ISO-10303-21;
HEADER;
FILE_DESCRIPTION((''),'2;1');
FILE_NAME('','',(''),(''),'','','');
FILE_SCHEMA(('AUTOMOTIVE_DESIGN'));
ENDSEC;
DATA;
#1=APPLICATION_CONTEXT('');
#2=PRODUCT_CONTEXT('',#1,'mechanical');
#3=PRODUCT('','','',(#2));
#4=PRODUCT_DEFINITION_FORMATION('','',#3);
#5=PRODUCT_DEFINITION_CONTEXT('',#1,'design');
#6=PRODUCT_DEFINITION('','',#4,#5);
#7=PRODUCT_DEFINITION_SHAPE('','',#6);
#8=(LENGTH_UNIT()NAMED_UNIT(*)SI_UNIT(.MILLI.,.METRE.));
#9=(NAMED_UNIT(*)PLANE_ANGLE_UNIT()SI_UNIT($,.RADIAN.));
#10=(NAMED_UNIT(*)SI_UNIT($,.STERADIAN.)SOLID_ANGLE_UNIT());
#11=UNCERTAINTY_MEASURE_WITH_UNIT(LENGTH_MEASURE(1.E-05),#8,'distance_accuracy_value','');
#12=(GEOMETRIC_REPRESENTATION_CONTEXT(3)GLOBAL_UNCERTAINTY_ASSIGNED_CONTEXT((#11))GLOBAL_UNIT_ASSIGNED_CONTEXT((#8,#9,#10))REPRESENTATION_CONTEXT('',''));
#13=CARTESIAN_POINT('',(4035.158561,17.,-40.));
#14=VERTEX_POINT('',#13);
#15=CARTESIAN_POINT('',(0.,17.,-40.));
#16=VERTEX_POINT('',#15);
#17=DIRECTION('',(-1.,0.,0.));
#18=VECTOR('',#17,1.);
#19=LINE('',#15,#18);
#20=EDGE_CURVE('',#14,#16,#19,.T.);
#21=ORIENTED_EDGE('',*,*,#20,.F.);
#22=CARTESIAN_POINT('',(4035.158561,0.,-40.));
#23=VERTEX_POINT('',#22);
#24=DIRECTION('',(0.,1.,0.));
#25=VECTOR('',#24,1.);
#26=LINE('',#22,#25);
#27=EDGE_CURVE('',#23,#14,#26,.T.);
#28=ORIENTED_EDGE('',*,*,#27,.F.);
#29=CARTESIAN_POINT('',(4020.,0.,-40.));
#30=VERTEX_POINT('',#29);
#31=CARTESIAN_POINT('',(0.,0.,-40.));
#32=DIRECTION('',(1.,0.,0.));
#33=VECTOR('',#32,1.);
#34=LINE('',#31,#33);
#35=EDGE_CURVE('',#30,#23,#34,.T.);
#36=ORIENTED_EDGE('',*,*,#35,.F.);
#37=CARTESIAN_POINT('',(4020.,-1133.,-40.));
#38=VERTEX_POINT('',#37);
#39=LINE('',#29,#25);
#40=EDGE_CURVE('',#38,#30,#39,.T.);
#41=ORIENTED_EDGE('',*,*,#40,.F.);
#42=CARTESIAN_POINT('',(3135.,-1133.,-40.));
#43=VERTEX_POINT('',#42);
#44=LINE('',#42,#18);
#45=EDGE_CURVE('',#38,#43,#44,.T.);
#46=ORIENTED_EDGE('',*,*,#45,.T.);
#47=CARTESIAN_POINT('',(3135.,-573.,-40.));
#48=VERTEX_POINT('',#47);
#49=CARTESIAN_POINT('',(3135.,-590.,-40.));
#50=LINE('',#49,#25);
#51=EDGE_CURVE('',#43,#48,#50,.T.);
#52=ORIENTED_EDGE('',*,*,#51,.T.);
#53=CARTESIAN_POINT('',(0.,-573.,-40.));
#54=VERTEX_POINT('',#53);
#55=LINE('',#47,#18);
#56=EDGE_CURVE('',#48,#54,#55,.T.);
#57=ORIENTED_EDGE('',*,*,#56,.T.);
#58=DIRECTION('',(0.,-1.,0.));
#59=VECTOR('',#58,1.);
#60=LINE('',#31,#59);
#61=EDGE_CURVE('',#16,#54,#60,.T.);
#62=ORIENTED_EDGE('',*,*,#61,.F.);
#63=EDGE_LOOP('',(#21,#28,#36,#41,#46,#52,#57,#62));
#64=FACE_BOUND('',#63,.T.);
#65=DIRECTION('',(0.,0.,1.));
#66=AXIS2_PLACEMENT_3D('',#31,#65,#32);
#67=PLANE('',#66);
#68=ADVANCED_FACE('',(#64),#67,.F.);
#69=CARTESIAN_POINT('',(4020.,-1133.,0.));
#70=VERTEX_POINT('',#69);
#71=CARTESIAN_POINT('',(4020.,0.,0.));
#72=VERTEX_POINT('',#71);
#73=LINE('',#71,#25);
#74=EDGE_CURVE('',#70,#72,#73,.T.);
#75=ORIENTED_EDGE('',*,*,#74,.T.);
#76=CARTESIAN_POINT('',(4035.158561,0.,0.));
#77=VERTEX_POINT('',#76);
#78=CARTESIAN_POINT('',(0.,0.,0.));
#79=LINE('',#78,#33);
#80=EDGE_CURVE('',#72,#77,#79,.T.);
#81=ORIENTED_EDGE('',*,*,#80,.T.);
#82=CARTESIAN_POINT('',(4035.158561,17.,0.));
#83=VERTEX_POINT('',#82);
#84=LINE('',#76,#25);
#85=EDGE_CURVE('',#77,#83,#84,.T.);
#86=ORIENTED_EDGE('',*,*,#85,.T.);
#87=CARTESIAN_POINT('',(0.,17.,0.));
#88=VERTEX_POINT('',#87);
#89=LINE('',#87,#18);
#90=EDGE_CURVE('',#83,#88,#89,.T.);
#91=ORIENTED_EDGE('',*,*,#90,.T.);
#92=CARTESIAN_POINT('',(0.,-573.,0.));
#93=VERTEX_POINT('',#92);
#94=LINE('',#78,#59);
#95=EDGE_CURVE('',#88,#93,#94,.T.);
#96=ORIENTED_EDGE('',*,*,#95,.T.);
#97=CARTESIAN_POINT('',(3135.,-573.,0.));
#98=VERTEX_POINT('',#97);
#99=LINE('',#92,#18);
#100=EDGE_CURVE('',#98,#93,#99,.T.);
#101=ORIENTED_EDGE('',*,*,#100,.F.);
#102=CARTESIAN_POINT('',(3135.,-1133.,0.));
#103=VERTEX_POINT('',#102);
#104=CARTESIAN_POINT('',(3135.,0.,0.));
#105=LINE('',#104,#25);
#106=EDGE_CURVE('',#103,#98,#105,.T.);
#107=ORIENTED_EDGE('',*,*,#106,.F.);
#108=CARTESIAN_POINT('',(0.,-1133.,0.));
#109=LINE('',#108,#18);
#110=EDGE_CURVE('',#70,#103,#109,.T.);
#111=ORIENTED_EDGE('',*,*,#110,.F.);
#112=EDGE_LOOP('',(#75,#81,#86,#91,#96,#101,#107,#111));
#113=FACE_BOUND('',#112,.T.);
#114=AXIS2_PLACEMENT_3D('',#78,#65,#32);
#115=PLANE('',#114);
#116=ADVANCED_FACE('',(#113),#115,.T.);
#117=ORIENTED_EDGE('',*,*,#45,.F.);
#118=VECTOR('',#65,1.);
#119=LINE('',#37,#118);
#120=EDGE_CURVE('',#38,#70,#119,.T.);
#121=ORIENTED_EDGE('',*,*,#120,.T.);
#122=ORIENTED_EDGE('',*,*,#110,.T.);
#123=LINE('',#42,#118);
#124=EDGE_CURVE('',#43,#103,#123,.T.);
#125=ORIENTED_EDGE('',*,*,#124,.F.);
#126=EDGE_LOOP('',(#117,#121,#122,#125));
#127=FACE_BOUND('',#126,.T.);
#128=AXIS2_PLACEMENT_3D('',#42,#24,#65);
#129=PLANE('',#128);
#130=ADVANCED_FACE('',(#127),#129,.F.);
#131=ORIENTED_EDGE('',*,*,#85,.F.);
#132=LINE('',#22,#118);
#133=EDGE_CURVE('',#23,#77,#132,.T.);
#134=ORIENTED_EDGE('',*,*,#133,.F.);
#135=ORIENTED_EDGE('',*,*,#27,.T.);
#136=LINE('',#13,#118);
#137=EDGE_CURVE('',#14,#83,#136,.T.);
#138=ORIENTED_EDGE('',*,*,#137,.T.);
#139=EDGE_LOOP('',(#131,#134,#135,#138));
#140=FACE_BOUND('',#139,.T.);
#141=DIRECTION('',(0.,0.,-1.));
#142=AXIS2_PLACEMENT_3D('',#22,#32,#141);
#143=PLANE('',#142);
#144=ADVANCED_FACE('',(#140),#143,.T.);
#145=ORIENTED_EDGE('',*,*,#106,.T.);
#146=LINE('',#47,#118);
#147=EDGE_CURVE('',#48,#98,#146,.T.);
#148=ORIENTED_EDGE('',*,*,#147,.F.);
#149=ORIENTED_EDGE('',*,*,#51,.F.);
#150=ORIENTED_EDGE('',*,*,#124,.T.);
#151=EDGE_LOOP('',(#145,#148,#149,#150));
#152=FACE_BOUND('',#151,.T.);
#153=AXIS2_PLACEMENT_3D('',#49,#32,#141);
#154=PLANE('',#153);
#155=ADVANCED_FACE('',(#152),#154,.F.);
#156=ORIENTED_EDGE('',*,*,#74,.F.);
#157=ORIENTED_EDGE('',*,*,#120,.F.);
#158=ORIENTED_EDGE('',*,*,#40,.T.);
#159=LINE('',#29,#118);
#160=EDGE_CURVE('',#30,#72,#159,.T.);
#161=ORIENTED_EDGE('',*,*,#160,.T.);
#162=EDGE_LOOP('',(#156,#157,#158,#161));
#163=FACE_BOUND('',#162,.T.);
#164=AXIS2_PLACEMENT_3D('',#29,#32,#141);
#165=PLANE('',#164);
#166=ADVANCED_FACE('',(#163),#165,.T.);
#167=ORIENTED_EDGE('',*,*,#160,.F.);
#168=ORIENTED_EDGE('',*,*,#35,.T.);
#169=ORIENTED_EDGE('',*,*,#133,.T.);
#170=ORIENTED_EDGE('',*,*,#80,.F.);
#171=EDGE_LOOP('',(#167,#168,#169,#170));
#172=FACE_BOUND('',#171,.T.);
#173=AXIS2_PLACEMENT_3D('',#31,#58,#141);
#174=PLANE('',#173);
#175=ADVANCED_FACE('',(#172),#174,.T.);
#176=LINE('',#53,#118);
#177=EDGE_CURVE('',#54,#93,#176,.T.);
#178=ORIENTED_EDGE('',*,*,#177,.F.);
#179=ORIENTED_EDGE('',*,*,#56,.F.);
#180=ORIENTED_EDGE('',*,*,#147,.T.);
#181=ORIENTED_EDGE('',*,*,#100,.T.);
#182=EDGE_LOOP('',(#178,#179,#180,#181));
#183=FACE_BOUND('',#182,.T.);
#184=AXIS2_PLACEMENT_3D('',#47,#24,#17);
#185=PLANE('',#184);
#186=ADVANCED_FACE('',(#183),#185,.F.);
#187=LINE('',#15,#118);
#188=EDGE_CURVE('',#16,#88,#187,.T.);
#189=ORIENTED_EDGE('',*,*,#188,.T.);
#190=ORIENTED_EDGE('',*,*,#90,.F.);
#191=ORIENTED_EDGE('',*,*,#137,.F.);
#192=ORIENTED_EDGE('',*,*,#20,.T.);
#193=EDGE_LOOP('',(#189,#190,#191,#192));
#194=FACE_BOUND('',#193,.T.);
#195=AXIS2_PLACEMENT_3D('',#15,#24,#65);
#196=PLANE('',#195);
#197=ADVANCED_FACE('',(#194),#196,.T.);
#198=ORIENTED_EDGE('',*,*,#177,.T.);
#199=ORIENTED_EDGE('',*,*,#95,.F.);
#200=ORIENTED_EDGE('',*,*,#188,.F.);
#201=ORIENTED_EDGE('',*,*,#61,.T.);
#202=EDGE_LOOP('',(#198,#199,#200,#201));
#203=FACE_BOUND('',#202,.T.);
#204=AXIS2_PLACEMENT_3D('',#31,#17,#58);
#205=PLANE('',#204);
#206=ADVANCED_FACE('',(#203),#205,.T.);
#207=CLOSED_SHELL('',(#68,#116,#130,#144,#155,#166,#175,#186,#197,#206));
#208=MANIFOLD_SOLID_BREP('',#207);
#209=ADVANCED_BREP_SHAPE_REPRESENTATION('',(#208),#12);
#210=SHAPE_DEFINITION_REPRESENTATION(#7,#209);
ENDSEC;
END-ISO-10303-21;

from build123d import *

# Parameters (mm, degrees)
TABAN_FLAN_1_DEPTH         = 40
KES_EKSTR_ZYON1_DEPTH      = 4482.26098325
KES_EKSTR_ZYON1_DEPTH_BACK = 4482.26098325
IZIM2_W                    = 2970
IZIM2_H                    = 405
KES_EKSTR_ZYON2_DEPTH      = 4482.26098325
KES_EKSTR_ZYON2_DEPTH_BACK = 4482.26098325
IZIM4_W                    = 10
IZIM4_H                    = 2000
SEKME1_DEPTH               = 40
IZIM7_W                    = 4035.158561441
IZIM7_H                    = 17
SEKME2_DEPTH               = 40
KES_EKSTR_ZYON3_DEPTH      = 4504.787807609
KES_EKSTR_ZYON3_DEPTH_BACK = 4504.787807609
IZIM10_W                   = 3135
IZIM10_H                   = 17
KES_EKSTR_ZYON4_DEPTH      = 4504.787807609
KES_EKSTR_ZYON4_DEPTH_BACK = 4504.787807609
IZIM12_W                   = 885
IZIM12_H                   = 860
KES_EKSTR_ZYON5_DEPTH      = 4194.292813049
KES_EKSTR_ZYON5_DEPTH_BACK = 4194.292813049
IZIM14_W                   = 885
IZIM14_H                   = 7


# Sheet-metal steps are written as plain solids
with BuildPart() as part:
    # Çizim1 → Taban-Flanş1 (new body)
    with BuildSketch(Plane.XY):
        Polygon((0, 0), (0, -1385), (3250, -1385), (3250, -2000), (4010, -2000), (4010, 0), align=None)
    extrude(amount=-TABAN_FLAN_1_DEPTH)

    # Çizim2 → Kes-Ekstrüzyon1 (cut, two sides: drawn at the far end of the back side and taken through both)
    with BuildSketch(Plane.XY.offset(-KES_EKSTR_ZYON1_DEPTH_BACK)):
        with Locations((1485, -1182.5)):
            Rectangle(IZIM2_W, IZIM2_H)
    extrude(amount=KES_EKSTR_ZYON1_DEPTH + KES_EKSTR_ZYON1_DEPTH_BACK, mode=Mode.SUBTRACT)

    # Çizim3 → Kes-Ekstrüzyon2 (cut, two sides: drawn at the far end of the back side and taken through both)
    with BuildSketch(Plane.XY.offset(-KES_EKSTR_ZYON2_DEPTH_BACK)):
        Polygon((0, -980), (2970, -980), (2970, -1385), (3135, -1385), (3135, -590), (0, -590), align=None)
    extrude(amount=KES_EKSTR_ZYON2_DEPTH + KES_EKSTR_ZYON2_DEPTH_BACK, mode=Mode.SUBTRACT)

    # Çizim4 → Sekme1 (add)
    with BuildSketch(Plane.XY):
        with Locations((4015, -1000)):
            Rectangle(IZIM4_W, IZIM4_H)
    extrude(amount=-SEKME1_DEPTH)

    # Çizim7 → Sekme2 (add)
    with BuildSketch(Plane.XY):
        with Locations((2017.579280721, 8.5)):
            Rectangle(IZIM7_W, IZIM7_H)
    extrude(amount=-SEKME2_DEPTH)

    # Çizim10 → Kes-Ekstrüzyon3 (cut, two sides: drawn at the far end of the back side and taken through both)
    with BuildSketch(Plane.XY.offset(-KES_EKSTR_ZYON3_DEPTH_BACK)):
        with Locations((1567.5, -581.5)):
            Rectangle(IZIM10_W, IZIM10_H)
    extrude(amount=KES_EKSTR_ZYON3_DEPTH + KES_EKSTR_ZYON3_DEPTH_BACK, mode=Mode.SUBTRACT)

    # Çizim12 → Kes-Ekstrüzyon4 (cut, two sides: drawn at the far end of the back side and taken through both)
    with BuildSketch(Plane.XY.offset(-KES_EKSTR_ZYON4_DEPTH_BACK)):
        with Locations((3577.5, -1570)):
            Rectangle(IZIM12_W, IZIM12_H)
    extrude(amount=KES_EKSTR_ZYON4_DEPTH + KES_EKSTR_ZYON4_DEPTH_BACK, mode=Mode.SUBTRACT)

    # Çizim14 → Kes-Ekstrüzyon5 (cut, two sides: drawn at the far end of the back side and taken through both)
    with BuildSketch(Plane.XY.offset(-KES_EKSTR_ZYON5_DEPTH_BACK)):
        with Locations((3577.5, -1136.5)):
            Rectangle(IZIM14_W, IZIM14_H)
    extrude(amount=KES_EKSTR_ZYON5_DEPTH + KES_EKSTR_ZYON5_DEPTH_BACK, mode=Mode.SUBTRACT)


solid = part.part
